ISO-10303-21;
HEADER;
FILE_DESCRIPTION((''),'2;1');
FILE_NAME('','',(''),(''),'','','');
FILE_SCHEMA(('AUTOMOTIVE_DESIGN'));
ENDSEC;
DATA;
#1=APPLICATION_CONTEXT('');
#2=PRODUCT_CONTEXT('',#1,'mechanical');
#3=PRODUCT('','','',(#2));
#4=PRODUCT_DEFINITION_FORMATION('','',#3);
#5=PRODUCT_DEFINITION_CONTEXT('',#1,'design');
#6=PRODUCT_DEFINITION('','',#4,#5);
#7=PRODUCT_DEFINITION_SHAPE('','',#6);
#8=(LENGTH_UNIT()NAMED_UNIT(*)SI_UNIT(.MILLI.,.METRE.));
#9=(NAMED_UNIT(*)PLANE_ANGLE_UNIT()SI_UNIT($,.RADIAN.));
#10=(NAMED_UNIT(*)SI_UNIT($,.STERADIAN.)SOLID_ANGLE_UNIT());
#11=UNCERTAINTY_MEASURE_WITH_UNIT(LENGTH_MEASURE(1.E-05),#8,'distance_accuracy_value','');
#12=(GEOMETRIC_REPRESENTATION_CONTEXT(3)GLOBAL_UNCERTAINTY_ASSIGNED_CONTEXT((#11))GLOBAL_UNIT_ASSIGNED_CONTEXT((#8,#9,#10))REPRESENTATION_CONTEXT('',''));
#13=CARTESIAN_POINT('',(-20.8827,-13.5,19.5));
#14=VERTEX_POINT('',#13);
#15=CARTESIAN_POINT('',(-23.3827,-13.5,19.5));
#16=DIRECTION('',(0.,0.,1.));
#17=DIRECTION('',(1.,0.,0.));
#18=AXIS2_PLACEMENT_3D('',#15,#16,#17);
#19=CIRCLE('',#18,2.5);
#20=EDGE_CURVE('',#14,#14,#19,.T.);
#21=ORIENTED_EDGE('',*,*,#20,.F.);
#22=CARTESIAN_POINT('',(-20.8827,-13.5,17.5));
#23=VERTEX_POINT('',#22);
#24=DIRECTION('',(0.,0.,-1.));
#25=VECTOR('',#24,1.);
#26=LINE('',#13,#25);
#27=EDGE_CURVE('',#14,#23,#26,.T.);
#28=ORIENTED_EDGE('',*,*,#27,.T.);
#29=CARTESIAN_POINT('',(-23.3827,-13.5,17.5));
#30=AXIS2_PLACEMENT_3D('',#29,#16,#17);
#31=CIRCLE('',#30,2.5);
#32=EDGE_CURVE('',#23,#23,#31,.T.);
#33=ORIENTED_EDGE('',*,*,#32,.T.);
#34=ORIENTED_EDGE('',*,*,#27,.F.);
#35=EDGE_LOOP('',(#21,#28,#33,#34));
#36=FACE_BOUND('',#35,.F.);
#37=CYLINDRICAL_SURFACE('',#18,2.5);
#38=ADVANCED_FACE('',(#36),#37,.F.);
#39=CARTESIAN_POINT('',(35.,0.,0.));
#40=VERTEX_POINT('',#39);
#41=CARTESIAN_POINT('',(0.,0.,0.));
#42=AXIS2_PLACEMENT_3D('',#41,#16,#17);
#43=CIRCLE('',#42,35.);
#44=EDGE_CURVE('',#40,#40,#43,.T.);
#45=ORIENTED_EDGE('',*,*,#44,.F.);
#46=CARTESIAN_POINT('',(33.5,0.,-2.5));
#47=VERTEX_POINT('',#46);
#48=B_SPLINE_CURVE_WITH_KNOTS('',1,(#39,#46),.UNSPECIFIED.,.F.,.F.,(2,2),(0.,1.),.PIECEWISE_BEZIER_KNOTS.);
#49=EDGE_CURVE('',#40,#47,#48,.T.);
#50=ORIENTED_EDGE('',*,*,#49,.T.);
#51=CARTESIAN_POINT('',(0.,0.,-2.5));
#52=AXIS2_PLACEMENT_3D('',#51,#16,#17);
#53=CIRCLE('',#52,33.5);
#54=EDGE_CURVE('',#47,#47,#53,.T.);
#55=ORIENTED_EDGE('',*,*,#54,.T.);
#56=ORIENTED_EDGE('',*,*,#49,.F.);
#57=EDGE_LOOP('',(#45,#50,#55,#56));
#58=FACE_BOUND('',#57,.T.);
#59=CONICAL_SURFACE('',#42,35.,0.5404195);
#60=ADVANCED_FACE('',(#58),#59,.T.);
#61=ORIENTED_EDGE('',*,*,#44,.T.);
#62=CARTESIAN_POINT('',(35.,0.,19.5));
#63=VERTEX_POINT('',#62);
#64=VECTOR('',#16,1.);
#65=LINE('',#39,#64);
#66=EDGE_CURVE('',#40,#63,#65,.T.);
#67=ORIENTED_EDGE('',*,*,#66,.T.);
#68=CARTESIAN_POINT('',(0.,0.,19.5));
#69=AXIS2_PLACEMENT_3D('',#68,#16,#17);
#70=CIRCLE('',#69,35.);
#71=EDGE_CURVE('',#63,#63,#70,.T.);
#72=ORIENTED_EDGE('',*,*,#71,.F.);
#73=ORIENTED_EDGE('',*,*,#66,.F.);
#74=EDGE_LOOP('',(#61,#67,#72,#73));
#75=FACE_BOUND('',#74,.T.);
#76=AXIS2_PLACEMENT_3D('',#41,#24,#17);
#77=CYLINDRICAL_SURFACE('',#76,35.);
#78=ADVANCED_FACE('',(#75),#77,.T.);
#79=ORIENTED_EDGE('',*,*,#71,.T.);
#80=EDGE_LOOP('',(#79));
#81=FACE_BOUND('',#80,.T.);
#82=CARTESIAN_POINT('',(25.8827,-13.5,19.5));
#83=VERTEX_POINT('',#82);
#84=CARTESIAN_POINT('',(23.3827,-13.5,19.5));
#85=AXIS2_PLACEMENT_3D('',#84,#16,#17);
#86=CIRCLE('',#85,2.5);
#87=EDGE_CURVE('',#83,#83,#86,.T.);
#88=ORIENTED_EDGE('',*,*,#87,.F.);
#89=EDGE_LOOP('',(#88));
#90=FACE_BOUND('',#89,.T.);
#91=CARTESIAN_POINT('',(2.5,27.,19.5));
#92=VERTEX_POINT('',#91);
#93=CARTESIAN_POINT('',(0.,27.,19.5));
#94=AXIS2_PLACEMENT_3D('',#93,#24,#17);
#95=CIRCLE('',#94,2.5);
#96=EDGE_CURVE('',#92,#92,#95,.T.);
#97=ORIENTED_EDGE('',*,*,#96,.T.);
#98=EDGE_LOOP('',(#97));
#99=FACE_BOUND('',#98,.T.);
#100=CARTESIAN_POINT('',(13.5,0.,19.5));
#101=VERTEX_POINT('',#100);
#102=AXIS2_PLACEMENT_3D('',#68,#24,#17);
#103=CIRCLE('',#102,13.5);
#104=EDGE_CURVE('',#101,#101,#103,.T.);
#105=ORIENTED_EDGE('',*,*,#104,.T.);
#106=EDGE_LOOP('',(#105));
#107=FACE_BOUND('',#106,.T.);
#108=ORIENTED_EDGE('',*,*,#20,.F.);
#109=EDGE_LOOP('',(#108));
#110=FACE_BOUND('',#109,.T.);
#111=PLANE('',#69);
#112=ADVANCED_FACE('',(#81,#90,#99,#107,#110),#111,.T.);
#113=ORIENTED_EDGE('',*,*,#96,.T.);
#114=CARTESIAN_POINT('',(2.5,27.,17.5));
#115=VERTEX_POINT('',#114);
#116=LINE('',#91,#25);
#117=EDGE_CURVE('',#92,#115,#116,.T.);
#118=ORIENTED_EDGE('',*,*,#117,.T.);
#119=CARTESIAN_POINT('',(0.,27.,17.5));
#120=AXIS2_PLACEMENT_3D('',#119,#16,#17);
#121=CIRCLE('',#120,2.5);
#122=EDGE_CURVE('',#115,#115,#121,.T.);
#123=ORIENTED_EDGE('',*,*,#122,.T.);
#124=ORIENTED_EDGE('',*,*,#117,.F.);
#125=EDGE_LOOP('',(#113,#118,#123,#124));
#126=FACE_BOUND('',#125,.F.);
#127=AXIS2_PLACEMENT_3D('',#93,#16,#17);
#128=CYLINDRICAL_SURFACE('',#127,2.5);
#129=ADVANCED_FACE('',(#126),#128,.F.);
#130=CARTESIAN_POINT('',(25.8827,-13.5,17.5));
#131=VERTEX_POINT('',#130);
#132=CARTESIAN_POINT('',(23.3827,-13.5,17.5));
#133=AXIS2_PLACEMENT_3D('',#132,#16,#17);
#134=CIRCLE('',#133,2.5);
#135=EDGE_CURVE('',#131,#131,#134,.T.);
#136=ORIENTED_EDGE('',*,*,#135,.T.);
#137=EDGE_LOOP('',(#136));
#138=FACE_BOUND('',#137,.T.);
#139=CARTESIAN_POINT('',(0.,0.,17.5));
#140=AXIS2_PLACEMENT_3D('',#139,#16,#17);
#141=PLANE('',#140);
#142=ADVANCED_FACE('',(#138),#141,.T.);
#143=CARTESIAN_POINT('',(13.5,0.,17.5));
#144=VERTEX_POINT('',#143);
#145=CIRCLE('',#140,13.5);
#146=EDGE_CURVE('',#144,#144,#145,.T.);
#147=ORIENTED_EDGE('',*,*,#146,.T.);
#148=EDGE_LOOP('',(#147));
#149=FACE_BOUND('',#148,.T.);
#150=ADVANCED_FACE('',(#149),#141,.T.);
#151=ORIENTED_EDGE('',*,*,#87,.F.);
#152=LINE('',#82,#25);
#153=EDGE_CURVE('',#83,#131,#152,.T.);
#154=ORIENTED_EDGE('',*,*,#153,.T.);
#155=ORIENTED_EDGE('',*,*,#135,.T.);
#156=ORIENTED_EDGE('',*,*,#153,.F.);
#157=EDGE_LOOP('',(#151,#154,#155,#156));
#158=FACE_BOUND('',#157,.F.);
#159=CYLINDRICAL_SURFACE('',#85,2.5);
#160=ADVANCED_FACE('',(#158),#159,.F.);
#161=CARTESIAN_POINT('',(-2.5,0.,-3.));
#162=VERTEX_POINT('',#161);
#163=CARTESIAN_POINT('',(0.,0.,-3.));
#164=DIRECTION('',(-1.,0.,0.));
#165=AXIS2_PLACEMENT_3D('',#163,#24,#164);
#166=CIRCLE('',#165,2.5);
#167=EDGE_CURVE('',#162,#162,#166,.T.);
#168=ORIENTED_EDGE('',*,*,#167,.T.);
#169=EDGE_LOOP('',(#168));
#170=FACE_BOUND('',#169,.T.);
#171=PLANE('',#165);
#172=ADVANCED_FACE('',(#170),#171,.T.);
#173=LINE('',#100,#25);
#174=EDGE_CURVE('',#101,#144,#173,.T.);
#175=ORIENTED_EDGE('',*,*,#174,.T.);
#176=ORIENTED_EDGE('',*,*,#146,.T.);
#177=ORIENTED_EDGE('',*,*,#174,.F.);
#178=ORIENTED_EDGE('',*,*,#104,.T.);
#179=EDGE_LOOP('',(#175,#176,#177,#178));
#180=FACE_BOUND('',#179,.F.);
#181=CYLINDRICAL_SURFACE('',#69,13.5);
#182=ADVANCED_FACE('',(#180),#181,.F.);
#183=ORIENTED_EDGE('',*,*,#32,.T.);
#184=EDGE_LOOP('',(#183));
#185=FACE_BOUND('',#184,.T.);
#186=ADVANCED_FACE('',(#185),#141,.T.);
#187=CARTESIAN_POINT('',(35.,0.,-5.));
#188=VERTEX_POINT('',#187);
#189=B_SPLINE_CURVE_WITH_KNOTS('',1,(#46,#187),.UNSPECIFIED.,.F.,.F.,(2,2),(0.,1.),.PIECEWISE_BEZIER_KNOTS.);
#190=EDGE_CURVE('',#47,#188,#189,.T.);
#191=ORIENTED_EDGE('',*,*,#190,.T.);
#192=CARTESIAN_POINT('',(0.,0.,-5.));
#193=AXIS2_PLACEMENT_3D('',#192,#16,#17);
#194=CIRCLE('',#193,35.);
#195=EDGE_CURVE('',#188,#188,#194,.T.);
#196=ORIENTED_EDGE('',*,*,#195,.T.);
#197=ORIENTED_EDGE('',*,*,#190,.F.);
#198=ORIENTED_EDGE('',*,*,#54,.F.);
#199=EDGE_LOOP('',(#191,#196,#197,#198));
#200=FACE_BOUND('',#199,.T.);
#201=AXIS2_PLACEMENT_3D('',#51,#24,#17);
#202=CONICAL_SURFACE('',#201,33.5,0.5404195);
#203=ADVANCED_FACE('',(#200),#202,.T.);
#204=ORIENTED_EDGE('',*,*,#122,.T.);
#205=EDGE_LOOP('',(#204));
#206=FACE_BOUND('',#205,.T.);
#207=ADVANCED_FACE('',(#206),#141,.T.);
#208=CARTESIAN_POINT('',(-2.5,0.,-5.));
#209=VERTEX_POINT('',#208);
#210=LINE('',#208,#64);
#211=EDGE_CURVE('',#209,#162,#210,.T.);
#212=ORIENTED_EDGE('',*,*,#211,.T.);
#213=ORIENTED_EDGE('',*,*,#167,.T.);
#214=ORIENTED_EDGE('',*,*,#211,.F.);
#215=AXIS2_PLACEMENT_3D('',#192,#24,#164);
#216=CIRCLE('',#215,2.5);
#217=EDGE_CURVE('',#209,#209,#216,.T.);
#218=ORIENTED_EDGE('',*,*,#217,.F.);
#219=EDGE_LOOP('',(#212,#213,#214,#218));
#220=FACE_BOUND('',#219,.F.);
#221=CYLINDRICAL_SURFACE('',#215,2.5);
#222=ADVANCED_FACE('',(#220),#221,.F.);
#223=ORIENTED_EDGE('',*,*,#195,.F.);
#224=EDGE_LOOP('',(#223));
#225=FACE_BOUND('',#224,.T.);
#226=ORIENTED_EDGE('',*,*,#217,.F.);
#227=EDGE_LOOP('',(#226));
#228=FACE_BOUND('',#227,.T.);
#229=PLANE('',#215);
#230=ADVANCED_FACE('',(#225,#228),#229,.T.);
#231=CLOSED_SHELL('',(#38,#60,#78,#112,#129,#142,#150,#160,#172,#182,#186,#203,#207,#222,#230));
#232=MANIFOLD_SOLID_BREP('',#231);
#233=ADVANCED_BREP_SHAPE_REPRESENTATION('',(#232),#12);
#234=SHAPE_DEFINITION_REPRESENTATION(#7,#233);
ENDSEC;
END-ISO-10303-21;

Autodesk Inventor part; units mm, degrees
ref_plane "YZ Plane" through (0, 0, 0) normal (1, 0, 0) x (0, 1, 0)
sketch "스케치1" plane through (0, 0, 0) normal (0, 0, 1) x (1, 0, 0)
  circle A0 centre (0, 0) radius 35
  dimension "d0" = 70
extrude "돌출1" add sketch "스케치1" along normal blind 19.5
sketch "스케치2" plane through (0, 0, 19.5) normal (0, 0, 1) x (1, 0, 0)
  line L0 (0, 0) -> (0, 27)
  circle A0 centre (0, 27) radius 2.5
  circle A1 centre (0, 0) radius 35 projected
  circle A2 centre (-23.3827, -13.5) radius 2.5
  circle A3 centre (23.3827, -13.5) radius 2.5
  circle A4 centre (0, 0) radius 13.5
  dimension "d3" = 27
  dimension "d4" = 5
  dimension "d7" = 360
extrude "돌출2" cut sketch "스케치2" against normal blind 2 contours A0 | A2 | A3 | A4
ref_plane "작업 평면1" through (0, 0, -2.5) normal (0, 0, -1) x (-1, 0, 0)
sketch "스케치4" plane through (0, 0, -2.5) normal (0, 0, -1) x (-1, 0, 0)
  circle A0 centre (0, 0) radius 33.5
  dimension "d12" = 67
loft "로프트1" add profiles "스케치4" section 1 edges at (-35, 0, 0)
ref_plane "작업 평면2" through (0, 0, -5) normal (0, 0, -1) x (-1, 0, 0)
sketch "스케치5" plane through (0, 0, -5) normal (0, 0, -1) x (-1, 0, 0)
  circle A0 centre (0, 0) radius 35
  dimension "d18" = 70
loft "로프트2" add profiles "스케치5" section 1 edges at (-33.5, 0, -2.5)
sketch "스케치6" plane through (0, 0, -5) normal (0, 0, -1) x (-1, 0, 0)
  circle A0 centre (0, 0) radius 2.5
  dimension "d23" = 5
extrude "돌출3" cut sketch "스케치6" against normal blind 2
properties part number "sensor"
